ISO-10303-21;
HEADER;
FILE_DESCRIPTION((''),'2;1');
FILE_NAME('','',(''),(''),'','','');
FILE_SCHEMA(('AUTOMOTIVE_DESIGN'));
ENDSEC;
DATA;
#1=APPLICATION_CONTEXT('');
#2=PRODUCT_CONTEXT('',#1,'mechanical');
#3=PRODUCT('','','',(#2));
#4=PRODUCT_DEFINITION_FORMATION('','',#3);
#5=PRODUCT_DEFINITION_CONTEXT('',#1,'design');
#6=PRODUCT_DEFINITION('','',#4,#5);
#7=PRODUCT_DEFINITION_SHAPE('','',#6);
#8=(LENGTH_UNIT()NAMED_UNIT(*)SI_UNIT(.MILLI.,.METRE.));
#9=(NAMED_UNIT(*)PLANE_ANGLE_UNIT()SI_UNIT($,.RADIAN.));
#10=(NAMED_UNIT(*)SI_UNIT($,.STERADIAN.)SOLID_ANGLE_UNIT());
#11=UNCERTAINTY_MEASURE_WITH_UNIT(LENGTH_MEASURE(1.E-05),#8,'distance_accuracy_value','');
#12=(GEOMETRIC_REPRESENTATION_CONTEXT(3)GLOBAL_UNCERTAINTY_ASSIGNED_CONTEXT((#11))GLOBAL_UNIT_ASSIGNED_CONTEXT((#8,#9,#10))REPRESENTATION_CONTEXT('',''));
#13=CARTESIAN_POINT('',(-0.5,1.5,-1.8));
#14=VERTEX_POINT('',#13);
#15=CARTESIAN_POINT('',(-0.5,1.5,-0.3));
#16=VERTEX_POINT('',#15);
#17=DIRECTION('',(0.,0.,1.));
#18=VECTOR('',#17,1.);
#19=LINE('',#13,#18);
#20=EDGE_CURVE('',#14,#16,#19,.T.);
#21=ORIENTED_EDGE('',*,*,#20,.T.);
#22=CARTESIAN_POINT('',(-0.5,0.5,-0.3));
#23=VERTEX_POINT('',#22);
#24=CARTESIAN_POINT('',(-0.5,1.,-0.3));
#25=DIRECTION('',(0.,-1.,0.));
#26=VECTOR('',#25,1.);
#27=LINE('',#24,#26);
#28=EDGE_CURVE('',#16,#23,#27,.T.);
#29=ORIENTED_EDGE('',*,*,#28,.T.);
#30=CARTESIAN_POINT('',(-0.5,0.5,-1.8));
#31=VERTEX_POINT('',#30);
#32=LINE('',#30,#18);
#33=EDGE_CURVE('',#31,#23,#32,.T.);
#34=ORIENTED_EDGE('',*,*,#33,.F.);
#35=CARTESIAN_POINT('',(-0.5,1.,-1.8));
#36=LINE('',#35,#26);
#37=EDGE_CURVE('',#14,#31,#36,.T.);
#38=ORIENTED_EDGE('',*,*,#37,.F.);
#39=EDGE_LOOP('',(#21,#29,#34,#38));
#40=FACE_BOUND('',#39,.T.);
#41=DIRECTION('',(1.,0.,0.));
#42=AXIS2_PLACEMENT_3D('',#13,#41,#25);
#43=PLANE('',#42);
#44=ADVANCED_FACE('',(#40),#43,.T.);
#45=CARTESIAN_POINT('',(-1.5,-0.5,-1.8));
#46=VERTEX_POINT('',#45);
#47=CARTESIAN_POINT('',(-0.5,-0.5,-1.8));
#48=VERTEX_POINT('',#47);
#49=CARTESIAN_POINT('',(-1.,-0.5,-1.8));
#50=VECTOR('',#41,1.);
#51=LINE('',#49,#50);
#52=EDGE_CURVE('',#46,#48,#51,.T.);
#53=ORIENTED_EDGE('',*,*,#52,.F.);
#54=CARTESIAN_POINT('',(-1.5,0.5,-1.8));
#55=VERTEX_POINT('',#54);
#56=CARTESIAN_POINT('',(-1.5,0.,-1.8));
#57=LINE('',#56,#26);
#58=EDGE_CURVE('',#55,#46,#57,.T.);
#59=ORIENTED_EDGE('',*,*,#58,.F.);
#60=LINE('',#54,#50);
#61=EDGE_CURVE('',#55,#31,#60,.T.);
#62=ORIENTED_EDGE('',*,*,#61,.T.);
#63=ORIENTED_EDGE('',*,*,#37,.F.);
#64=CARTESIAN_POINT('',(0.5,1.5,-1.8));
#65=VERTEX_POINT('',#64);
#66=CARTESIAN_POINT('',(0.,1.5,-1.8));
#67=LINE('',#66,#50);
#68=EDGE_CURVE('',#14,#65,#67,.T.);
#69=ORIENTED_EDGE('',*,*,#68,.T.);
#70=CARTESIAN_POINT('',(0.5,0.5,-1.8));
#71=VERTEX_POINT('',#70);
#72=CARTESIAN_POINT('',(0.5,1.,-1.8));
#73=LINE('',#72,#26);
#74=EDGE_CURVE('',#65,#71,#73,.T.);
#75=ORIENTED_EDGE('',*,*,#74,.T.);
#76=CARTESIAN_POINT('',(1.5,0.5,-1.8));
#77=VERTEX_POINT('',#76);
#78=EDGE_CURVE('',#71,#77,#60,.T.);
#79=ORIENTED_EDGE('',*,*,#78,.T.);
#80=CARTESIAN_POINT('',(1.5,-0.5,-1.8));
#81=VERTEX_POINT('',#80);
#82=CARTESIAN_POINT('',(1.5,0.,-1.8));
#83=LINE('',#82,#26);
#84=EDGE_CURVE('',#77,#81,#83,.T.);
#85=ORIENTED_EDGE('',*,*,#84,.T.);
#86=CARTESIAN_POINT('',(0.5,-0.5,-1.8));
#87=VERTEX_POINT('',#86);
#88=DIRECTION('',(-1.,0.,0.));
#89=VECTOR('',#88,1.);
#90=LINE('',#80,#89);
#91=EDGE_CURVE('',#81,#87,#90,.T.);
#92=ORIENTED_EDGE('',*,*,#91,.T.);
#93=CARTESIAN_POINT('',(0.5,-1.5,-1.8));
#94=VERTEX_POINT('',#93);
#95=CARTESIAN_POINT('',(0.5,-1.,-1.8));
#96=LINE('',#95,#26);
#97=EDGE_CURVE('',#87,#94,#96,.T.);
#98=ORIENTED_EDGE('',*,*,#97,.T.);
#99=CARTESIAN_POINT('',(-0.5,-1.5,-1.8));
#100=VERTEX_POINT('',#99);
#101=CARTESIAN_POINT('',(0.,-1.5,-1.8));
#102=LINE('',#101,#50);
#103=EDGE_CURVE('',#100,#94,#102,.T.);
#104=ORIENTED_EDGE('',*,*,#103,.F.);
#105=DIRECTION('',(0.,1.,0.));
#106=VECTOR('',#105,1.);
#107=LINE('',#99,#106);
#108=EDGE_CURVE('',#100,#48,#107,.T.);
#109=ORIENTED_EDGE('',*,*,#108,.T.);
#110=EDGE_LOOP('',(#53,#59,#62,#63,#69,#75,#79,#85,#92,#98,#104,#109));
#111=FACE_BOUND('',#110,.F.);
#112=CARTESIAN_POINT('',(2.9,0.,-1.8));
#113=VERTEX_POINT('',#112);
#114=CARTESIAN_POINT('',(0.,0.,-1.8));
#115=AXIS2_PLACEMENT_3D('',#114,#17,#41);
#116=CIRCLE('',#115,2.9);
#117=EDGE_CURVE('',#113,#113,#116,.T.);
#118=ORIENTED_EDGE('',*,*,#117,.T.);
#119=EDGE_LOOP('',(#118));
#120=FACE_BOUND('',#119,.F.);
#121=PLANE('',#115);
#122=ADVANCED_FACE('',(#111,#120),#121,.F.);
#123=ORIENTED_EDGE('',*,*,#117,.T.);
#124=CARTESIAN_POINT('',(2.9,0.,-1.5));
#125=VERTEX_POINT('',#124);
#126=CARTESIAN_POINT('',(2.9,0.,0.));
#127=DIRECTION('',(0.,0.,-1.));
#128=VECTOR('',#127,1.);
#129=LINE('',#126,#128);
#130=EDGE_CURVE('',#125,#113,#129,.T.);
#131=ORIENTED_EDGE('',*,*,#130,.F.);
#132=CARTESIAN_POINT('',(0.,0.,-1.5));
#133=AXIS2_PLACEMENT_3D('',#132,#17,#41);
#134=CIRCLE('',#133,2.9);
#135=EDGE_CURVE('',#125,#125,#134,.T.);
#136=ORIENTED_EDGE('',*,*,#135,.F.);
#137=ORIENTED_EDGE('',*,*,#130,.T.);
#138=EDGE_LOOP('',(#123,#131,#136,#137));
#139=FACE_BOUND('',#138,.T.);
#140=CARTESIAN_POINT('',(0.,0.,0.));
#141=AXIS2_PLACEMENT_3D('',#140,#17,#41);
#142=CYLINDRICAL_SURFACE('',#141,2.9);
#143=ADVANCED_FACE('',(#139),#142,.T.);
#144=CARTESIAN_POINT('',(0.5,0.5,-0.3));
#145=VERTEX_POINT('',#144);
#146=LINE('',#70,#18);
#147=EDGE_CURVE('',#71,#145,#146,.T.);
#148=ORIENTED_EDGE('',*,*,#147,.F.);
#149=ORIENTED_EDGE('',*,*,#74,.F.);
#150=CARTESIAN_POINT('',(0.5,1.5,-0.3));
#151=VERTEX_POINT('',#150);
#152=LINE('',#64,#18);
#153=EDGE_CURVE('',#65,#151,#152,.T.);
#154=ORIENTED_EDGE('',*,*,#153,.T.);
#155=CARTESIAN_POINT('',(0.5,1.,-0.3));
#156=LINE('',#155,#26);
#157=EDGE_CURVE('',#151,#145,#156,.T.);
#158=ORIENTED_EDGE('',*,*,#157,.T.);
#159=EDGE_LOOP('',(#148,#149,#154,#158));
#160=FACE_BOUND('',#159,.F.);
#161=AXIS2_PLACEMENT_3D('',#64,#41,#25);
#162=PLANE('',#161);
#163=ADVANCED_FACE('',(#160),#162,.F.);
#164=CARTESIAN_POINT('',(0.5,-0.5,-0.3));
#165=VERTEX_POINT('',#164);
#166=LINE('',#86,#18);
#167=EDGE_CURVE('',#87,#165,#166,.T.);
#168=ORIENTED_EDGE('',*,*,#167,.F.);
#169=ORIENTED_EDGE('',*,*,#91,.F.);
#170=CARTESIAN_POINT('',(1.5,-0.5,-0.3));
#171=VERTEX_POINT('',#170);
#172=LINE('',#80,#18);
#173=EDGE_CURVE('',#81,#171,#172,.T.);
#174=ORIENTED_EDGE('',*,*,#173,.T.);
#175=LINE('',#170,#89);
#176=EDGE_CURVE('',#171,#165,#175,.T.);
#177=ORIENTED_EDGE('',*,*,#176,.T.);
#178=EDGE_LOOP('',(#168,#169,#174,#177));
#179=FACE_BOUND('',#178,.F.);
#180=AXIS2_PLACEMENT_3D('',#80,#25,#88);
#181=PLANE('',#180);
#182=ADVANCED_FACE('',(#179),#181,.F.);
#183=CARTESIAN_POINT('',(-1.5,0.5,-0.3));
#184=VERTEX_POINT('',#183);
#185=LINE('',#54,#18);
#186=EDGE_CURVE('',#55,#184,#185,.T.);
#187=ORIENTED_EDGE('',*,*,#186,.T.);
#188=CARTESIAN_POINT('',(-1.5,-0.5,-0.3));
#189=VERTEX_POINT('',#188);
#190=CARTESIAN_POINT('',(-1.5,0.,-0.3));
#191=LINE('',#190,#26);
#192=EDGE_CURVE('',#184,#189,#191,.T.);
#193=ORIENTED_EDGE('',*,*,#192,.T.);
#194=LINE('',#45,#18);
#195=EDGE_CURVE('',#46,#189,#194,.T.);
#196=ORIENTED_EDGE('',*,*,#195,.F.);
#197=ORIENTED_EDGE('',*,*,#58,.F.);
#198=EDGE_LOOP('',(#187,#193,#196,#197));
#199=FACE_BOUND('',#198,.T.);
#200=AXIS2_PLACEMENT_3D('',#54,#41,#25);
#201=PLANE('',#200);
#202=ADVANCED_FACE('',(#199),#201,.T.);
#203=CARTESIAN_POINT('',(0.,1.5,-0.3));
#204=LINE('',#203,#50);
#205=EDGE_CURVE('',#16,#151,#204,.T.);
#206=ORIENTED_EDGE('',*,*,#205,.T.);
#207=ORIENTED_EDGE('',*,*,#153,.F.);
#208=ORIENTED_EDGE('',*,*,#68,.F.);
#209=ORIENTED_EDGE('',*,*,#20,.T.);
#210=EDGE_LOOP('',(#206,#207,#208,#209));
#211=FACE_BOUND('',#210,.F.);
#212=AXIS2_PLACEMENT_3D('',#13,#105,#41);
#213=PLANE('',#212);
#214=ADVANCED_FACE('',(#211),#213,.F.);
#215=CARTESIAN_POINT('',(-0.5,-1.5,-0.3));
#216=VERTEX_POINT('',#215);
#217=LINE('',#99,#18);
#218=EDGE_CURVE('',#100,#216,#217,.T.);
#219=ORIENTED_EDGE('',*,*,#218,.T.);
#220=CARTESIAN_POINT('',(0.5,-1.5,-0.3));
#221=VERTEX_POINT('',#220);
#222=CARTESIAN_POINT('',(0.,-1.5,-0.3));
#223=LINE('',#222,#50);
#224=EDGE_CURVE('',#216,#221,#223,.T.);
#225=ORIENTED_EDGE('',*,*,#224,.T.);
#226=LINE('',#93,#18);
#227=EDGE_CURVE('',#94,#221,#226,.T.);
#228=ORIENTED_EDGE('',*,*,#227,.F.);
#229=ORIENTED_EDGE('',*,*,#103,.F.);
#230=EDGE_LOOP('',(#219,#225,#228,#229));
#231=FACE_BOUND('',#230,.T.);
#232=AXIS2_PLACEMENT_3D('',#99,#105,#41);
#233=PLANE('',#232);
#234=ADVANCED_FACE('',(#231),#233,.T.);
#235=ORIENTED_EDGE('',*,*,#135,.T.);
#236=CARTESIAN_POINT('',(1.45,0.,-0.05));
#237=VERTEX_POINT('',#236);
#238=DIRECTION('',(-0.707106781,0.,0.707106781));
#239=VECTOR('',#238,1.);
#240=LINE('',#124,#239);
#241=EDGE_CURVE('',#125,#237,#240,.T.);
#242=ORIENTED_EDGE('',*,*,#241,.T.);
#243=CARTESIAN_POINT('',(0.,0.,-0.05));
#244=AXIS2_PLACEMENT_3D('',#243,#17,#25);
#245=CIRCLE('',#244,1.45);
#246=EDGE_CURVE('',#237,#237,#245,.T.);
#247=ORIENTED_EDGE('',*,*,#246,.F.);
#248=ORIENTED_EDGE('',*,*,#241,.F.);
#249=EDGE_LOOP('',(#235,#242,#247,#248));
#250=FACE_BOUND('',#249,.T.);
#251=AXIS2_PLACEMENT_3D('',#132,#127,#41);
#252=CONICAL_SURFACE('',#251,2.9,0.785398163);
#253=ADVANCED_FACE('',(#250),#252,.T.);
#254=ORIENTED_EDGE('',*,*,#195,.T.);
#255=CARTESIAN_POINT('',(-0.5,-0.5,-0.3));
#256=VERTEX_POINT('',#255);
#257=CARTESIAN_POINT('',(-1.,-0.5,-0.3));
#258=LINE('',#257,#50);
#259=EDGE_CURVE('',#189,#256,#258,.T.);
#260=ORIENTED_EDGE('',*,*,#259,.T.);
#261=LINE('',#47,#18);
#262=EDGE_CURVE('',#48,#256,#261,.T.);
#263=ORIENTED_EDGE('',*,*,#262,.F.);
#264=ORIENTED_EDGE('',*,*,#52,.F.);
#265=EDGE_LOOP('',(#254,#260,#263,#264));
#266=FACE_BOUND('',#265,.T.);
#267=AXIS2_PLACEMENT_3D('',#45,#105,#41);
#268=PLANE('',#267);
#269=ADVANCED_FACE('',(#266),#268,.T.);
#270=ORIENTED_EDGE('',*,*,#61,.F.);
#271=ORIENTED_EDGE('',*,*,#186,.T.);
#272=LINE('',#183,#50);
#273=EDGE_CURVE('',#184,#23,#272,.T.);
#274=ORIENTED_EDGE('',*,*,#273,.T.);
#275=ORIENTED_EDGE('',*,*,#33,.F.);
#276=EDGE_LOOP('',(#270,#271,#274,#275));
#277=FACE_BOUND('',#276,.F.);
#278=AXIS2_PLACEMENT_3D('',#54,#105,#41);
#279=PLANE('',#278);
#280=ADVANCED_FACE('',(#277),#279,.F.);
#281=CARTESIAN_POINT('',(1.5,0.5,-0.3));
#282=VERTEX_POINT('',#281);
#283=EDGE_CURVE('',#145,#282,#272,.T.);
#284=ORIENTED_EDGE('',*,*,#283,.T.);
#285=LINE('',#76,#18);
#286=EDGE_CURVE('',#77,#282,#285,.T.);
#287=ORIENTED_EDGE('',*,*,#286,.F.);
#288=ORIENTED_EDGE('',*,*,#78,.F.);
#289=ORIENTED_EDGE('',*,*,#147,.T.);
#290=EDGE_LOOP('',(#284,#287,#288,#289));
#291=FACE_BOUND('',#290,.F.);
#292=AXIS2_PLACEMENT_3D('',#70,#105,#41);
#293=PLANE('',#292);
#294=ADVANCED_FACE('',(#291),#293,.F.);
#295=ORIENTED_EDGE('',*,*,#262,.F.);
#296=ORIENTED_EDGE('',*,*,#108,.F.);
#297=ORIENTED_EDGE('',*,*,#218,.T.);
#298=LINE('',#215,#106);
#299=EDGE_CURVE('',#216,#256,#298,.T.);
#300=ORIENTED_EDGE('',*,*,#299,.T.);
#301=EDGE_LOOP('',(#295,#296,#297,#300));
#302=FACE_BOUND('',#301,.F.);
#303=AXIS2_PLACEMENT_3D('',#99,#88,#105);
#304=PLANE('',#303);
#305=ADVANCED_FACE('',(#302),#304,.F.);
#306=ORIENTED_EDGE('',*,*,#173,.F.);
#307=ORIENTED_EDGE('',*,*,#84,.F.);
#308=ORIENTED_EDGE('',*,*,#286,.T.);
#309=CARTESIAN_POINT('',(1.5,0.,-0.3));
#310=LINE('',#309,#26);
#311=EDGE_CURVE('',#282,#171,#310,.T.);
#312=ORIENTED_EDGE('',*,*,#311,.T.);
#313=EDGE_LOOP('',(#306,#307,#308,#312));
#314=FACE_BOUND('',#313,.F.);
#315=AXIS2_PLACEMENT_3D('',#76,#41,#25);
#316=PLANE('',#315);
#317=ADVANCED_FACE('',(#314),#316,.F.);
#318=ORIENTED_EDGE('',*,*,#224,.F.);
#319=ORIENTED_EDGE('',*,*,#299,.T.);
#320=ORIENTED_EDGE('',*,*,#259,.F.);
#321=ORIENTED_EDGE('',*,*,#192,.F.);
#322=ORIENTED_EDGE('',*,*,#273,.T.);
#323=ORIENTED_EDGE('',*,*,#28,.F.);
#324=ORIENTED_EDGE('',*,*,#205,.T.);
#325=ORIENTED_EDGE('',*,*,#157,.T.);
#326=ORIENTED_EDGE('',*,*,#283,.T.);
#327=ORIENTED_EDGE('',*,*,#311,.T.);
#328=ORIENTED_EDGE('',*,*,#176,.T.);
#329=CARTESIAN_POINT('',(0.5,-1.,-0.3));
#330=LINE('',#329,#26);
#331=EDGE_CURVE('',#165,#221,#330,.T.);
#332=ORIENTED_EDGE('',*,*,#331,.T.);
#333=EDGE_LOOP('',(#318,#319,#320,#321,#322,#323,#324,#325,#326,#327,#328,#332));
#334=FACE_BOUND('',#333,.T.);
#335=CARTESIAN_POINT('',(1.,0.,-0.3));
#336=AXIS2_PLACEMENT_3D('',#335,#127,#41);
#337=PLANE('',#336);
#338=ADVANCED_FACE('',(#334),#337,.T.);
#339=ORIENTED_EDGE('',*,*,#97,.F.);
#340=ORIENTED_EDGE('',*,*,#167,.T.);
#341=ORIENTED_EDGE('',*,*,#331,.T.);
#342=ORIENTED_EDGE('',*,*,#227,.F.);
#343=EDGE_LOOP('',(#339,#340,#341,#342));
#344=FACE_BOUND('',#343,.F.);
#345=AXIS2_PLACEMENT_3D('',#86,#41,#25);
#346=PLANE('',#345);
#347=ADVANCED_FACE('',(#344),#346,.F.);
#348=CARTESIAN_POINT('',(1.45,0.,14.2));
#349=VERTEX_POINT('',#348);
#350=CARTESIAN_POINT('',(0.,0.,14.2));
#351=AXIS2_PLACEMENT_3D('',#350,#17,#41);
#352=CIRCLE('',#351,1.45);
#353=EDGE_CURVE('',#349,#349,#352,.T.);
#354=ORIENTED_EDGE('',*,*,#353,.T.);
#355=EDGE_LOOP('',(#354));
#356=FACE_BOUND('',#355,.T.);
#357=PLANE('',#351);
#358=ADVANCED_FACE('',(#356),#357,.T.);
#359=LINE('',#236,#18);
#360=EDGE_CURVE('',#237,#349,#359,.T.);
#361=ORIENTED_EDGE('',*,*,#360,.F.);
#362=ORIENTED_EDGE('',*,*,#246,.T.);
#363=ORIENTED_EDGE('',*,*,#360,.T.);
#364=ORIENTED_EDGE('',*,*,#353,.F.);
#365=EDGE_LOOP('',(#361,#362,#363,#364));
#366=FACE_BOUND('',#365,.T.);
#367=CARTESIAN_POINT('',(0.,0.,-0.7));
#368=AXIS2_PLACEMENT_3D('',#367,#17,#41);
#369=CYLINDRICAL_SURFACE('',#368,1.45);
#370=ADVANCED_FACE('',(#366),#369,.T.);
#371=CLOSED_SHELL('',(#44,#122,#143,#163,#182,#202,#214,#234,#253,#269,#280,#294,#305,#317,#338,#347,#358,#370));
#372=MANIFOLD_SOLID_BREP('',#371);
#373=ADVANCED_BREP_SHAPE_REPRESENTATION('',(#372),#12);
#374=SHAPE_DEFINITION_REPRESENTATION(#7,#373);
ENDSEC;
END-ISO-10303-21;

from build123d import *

# Parameters (mm, degrees)
F0_R        = 1.45
F1_DEPTH    = 14.2
F2_R        = 2.9
F3_DEPTH    = 1.8
F4_W        = 1
F4_H        = 1
F5_DEPTH    = 1.5
F6_S5_R     = 1.45
F6_T6_DEPTH = 6


# Not quite as in the source:
# - a fillet or chamfer that OpenCascade refuses, or shapes differently, is made with other operations: its cross-section is extruded or revolved along the edge and cut away or added


with BuildPart() as f1:
    # F0 (on Top) → F1 (new body)
    with BuildSketch(Plane.XY):
        Circle(F0_R)
    extrude(amount=F1_DEPTH)

    # F2 (on Top) → F3 (join)
    with BuildSketch(Plane.XY):
        Circle(F2_R)
    extrude(amount=-F3_DEPTH)

    # F4 (on face) → F5 (cut)
    with BuildSketch(Plane(origin=(0, 0, -1.8), x_dir=(1, 0, 0), z_dir=(0, 0, -1))):
        with Locations((1, 0)):
            Rectangle(F4_W, F4_H)
        Rectangle(F4_W, F4_H)
        with Locations((0, 1)):
            Rectangle(F4_W, F4_H)
        with Locations((-1, 0)):
            Rectangle(F4_W, F4_H)
        with Locations((0, -1)):
            Rectangle(F4_W, F4_H)
    extrude(amount=-F5_DEPTH, mode=Mode.SUBTRACT)

    # F6: chamfer of 1.5 on 1 edges, made by hand


with BuildPart() as f6_tool2:
    # F6_s3 → F6_t4 (revolve)
    with BuildSketch(Plane.XZ):
        Polygon((2.9, -1.5), (1.4, 0), (2.9, 0), align=None)
    revolve(axis=Axis((0, 0, 0), (0, 0, 1)))

    # F6_s5 → F6_t6 (cut, symmetric)
    with BuildSketch(Plane.XY.offset(-0.7)):
        Circle(F6_S5_R)
    extrude(amount=F6_T6_DEPTH, both=True, mode=Mode.SUBTRACT)


with BuildPart() as f1_1:
    add(f1.part)

    # F6_t1: cut F6_tool2
    add(f6_tool2.part, mode=Mode.SUBTRACT)


solid = f1_1.part
